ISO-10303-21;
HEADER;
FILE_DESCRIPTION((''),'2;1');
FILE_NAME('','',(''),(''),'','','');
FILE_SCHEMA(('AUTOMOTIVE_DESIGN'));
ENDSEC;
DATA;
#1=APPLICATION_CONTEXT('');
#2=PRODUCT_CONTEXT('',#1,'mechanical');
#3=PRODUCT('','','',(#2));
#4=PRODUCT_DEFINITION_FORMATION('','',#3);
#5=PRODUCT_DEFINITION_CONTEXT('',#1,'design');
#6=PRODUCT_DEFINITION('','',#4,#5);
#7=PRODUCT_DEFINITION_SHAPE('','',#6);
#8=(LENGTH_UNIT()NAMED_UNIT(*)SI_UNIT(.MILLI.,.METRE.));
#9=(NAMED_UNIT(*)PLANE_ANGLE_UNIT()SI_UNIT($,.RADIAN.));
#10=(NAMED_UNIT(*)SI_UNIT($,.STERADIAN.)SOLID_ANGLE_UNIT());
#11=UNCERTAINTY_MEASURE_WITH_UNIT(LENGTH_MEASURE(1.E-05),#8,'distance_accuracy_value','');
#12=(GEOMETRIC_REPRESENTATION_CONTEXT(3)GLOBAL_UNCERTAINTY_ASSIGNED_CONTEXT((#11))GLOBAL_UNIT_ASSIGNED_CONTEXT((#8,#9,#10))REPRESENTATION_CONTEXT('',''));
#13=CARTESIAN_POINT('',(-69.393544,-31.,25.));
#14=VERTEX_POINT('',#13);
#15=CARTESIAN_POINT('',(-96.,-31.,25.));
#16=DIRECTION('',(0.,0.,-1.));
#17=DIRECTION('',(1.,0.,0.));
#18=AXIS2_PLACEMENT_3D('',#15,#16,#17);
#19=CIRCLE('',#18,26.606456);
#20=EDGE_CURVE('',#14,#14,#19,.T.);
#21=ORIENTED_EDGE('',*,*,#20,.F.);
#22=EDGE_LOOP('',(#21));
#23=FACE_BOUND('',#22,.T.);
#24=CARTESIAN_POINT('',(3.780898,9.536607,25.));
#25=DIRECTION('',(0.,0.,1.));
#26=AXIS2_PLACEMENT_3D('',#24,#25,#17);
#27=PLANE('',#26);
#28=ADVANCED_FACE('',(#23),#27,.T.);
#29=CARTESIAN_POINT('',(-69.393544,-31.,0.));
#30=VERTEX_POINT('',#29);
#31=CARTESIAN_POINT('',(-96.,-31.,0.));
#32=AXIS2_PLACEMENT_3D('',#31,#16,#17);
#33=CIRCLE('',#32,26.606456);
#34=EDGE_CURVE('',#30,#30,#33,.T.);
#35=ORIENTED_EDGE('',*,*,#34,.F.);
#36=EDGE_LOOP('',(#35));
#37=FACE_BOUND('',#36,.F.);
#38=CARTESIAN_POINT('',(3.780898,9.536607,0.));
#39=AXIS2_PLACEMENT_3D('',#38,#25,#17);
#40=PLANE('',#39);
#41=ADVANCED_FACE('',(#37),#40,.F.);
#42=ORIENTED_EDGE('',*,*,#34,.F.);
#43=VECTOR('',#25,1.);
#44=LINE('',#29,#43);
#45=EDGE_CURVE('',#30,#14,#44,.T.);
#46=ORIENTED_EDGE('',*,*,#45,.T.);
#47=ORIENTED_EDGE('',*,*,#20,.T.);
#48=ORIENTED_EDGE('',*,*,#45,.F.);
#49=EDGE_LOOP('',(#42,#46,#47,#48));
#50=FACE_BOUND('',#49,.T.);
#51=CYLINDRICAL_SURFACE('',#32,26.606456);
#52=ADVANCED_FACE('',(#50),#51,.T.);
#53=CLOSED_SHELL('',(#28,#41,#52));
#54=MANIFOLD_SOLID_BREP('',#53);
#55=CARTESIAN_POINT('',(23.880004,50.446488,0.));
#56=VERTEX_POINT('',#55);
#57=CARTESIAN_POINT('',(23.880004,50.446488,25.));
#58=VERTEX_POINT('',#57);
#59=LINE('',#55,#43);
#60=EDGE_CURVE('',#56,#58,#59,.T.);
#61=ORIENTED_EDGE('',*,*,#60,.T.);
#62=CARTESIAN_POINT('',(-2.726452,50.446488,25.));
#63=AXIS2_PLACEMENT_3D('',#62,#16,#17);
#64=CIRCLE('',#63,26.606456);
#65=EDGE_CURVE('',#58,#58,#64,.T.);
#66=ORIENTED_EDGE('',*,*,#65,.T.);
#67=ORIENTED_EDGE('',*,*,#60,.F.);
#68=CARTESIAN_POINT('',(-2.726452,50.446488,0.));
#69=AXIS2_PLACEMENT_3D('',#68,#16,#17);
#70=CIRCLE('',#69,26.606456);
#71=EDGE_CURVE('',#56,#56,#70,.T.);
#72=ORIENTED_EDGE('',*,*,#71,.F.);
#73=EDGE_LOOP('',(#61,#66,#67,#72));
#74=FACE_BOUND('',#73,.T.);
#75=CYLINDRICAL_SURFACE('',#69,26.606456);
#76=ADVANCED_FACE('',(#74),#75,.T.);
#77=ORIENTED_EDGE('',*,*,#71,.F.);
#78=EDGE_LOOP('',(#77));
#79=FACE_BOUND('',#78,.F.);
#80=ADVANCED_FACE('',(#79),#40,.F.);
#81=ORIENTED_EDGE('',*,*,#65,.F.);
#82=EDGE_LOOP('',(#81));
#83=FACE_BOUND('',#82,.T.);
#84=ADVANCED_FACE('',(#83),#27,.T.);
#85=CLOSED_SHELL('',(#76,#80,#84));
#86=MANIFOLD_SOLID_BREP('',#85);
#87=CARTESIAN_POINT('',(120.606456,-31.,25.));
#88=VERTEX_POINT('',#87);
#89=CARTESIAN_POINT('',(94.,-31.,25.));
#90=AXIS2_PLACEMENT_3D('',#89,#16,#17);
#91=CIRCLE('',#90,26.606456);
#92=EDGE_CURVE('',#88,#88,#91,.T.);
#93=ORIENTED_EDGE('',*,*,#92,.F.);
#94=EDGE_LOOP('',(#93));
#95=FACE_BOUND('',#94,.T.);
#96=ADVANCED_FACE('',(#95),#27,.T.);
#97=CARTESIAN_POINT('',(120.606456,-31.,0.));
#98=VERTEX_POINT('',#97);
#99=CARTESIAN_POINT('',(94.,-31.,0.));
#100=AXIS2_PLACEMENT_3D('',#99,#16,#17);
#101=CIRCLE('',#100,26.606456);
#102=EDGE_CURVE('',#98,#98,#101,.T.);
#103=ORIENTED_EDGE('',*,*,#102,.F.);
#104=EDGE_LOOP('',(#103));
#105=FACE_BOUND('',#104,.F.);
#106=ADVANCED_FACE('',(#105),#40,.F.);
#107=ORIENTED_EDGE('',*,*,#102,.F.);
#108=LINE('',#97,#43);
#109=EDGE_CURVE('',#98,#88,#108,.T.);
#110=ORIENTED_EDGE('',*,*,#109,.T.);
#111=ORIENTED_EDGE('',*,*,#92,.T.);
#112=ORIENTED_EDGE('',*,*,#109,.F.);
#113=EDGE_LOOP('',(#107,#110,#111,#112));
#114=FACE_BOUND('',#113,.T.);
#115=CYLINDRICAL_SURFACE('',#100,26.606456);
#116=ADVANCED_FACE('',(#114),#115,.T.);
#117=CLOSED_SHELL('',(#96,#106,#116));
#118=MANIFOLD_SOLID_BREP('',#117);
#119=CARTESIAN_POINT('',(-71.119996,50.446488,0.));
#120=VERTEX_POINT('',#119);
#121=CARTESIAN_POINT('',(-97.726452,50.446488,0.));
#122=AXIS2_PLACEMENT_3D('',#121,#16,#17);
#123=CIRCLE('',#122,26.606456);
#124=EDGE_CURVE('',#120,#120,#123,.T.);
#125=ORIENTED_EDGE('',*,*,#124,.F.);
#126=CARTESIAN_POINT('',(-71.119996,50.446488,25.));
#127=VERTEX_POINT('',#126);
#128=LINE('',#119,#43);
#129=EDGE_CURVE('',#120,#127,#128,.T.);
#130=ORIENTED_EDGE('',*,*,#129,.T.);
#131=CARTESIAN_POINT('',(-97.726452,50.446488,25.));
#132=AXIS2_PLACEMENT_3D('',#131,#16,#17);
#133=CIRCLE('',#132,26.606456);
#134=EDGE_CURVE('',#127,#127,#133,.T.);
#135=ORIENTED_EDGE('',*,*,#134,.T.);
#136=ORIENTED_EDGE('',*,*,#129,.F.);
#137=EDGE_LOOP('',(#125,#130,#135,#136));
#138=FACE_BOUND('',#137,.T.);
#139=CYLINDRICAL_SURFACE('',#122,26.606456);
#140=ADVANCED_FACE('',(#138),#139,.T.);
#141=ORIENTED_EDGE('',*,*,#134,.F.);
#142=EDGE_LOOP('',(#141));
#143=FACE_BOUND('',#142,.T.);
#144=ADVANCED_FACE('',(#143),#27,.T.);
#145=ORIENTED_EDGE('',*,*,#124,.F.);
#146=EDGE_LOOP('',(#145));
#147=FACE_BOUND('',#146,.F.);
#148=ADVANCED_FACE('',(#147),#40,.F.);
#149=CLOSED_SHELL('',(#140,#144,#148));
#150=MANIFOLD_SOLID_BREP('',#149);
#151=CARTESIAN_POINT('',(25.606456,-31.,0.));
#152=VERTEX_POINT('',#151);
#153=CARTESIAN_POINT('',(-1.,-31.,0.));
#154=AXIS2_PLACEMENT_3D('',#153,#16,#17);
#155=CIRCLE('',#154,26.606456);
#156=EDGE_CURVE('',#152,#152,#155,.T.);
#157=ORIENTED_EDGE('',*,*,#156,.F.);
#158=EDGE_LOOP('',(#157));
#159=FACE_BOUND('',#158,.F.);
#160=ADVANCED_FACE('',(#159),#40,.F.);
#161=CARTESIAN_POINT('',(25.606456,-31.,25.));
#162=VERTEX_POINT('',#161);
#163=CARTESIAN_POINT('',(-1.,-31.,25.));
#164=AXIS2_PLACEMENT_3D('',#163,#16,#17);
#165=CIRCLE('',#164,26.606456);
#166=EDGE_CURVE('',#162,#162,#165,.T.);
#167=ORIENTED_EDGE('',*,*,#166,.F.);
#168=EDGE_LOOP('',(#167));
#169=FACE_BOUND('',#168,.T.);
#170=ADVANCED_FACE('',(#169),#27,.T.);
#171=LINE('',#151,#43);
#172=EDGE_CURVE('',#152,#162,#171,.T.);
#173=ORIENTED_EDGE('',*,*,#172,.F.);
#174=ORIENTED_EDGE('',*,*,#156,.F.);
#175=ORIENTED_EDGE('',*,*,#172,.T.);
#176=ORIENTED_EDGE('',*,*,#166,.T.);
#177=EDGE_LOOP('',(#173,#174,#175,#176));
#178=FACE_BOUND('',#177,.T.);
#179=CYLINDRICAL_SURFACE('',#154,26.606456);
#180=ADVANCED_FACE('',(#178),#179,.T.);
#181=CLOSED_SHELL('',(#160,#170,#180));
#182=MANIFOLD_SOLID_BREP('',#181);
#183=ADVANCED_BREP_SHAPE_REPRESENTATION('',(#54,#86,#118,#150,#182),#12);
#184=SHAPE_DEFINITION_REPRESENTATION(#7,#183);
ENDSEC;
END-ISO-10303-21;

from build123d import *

# Parameters (mm, degrees)
F0_W       = 300
F0_H       = 160
F1_DEPTH   = 25
F2_W       = 300
F2_H       = 160
F2_R       = 26.6064560027
F1_FACE1_W = 300
F1_FACE1_H = 160
F3_DEPTH   = 25.001


with BuildPart() as f1:
    # F0 (on Top) → F1 (new body)
    with BuildSketch(Plane.XY):
        with Locations((3.7808977067, 9.5366072031)):
            Rectangle(F0_W, F0_H)
    extrude(amount=F1_DEPTH)

    # F2 (on face) + F1_face1 (on face) → F3 (cut, through all)
    with BuildSketch(Plane(origin=(0, 0, 0), x_dir=(1, 0, 0), z_dir=(0, 0, -1))):
        with Locations((3.7808977067, -9.5366072031)):
            Rectangle(F2_W, F2_H)
        with Locations((-97.7264517546, -50.4464879632)):
            Circle(F2_R, mode=Mode.SUBTRACT)
        with Locations((-2.7264517546, -50.4464879632)):
            Circle(F2_R, mode=Mode.SUBTRACT)
        with Locations((92.2735482454, -50.4464879632)):
            Circle(F2_R, mode=Mode.SUBTRACT)
        with Locations((-96, 31)):
            Circle(F2_R, mode=Mode.SUBTRACT)
        with Locations((-1, 31)):
            Circle(F2_R, mode=Mode.SUBTRACT)
        with Locations((94, 31)):
            Circle(F2_R, mode=Mode.SUBTRACT)
        with Locations((92.2735482454, -50.4464879632)):
            Circle(F2_R)
    with BuildSketch(Plane(origin=(3.7808977067, 9.5366072031, 25), x_dir=(1, 0, 0), z_dir=(0, 0, 1))):
        Rectangle(F1_FACE1_W, F1_FACE1_H)
    extrude(amount=-F3_DEPTH, dir=(0, 0, -1), mode=Mode.SUBTRACT)


solid = f1.part
